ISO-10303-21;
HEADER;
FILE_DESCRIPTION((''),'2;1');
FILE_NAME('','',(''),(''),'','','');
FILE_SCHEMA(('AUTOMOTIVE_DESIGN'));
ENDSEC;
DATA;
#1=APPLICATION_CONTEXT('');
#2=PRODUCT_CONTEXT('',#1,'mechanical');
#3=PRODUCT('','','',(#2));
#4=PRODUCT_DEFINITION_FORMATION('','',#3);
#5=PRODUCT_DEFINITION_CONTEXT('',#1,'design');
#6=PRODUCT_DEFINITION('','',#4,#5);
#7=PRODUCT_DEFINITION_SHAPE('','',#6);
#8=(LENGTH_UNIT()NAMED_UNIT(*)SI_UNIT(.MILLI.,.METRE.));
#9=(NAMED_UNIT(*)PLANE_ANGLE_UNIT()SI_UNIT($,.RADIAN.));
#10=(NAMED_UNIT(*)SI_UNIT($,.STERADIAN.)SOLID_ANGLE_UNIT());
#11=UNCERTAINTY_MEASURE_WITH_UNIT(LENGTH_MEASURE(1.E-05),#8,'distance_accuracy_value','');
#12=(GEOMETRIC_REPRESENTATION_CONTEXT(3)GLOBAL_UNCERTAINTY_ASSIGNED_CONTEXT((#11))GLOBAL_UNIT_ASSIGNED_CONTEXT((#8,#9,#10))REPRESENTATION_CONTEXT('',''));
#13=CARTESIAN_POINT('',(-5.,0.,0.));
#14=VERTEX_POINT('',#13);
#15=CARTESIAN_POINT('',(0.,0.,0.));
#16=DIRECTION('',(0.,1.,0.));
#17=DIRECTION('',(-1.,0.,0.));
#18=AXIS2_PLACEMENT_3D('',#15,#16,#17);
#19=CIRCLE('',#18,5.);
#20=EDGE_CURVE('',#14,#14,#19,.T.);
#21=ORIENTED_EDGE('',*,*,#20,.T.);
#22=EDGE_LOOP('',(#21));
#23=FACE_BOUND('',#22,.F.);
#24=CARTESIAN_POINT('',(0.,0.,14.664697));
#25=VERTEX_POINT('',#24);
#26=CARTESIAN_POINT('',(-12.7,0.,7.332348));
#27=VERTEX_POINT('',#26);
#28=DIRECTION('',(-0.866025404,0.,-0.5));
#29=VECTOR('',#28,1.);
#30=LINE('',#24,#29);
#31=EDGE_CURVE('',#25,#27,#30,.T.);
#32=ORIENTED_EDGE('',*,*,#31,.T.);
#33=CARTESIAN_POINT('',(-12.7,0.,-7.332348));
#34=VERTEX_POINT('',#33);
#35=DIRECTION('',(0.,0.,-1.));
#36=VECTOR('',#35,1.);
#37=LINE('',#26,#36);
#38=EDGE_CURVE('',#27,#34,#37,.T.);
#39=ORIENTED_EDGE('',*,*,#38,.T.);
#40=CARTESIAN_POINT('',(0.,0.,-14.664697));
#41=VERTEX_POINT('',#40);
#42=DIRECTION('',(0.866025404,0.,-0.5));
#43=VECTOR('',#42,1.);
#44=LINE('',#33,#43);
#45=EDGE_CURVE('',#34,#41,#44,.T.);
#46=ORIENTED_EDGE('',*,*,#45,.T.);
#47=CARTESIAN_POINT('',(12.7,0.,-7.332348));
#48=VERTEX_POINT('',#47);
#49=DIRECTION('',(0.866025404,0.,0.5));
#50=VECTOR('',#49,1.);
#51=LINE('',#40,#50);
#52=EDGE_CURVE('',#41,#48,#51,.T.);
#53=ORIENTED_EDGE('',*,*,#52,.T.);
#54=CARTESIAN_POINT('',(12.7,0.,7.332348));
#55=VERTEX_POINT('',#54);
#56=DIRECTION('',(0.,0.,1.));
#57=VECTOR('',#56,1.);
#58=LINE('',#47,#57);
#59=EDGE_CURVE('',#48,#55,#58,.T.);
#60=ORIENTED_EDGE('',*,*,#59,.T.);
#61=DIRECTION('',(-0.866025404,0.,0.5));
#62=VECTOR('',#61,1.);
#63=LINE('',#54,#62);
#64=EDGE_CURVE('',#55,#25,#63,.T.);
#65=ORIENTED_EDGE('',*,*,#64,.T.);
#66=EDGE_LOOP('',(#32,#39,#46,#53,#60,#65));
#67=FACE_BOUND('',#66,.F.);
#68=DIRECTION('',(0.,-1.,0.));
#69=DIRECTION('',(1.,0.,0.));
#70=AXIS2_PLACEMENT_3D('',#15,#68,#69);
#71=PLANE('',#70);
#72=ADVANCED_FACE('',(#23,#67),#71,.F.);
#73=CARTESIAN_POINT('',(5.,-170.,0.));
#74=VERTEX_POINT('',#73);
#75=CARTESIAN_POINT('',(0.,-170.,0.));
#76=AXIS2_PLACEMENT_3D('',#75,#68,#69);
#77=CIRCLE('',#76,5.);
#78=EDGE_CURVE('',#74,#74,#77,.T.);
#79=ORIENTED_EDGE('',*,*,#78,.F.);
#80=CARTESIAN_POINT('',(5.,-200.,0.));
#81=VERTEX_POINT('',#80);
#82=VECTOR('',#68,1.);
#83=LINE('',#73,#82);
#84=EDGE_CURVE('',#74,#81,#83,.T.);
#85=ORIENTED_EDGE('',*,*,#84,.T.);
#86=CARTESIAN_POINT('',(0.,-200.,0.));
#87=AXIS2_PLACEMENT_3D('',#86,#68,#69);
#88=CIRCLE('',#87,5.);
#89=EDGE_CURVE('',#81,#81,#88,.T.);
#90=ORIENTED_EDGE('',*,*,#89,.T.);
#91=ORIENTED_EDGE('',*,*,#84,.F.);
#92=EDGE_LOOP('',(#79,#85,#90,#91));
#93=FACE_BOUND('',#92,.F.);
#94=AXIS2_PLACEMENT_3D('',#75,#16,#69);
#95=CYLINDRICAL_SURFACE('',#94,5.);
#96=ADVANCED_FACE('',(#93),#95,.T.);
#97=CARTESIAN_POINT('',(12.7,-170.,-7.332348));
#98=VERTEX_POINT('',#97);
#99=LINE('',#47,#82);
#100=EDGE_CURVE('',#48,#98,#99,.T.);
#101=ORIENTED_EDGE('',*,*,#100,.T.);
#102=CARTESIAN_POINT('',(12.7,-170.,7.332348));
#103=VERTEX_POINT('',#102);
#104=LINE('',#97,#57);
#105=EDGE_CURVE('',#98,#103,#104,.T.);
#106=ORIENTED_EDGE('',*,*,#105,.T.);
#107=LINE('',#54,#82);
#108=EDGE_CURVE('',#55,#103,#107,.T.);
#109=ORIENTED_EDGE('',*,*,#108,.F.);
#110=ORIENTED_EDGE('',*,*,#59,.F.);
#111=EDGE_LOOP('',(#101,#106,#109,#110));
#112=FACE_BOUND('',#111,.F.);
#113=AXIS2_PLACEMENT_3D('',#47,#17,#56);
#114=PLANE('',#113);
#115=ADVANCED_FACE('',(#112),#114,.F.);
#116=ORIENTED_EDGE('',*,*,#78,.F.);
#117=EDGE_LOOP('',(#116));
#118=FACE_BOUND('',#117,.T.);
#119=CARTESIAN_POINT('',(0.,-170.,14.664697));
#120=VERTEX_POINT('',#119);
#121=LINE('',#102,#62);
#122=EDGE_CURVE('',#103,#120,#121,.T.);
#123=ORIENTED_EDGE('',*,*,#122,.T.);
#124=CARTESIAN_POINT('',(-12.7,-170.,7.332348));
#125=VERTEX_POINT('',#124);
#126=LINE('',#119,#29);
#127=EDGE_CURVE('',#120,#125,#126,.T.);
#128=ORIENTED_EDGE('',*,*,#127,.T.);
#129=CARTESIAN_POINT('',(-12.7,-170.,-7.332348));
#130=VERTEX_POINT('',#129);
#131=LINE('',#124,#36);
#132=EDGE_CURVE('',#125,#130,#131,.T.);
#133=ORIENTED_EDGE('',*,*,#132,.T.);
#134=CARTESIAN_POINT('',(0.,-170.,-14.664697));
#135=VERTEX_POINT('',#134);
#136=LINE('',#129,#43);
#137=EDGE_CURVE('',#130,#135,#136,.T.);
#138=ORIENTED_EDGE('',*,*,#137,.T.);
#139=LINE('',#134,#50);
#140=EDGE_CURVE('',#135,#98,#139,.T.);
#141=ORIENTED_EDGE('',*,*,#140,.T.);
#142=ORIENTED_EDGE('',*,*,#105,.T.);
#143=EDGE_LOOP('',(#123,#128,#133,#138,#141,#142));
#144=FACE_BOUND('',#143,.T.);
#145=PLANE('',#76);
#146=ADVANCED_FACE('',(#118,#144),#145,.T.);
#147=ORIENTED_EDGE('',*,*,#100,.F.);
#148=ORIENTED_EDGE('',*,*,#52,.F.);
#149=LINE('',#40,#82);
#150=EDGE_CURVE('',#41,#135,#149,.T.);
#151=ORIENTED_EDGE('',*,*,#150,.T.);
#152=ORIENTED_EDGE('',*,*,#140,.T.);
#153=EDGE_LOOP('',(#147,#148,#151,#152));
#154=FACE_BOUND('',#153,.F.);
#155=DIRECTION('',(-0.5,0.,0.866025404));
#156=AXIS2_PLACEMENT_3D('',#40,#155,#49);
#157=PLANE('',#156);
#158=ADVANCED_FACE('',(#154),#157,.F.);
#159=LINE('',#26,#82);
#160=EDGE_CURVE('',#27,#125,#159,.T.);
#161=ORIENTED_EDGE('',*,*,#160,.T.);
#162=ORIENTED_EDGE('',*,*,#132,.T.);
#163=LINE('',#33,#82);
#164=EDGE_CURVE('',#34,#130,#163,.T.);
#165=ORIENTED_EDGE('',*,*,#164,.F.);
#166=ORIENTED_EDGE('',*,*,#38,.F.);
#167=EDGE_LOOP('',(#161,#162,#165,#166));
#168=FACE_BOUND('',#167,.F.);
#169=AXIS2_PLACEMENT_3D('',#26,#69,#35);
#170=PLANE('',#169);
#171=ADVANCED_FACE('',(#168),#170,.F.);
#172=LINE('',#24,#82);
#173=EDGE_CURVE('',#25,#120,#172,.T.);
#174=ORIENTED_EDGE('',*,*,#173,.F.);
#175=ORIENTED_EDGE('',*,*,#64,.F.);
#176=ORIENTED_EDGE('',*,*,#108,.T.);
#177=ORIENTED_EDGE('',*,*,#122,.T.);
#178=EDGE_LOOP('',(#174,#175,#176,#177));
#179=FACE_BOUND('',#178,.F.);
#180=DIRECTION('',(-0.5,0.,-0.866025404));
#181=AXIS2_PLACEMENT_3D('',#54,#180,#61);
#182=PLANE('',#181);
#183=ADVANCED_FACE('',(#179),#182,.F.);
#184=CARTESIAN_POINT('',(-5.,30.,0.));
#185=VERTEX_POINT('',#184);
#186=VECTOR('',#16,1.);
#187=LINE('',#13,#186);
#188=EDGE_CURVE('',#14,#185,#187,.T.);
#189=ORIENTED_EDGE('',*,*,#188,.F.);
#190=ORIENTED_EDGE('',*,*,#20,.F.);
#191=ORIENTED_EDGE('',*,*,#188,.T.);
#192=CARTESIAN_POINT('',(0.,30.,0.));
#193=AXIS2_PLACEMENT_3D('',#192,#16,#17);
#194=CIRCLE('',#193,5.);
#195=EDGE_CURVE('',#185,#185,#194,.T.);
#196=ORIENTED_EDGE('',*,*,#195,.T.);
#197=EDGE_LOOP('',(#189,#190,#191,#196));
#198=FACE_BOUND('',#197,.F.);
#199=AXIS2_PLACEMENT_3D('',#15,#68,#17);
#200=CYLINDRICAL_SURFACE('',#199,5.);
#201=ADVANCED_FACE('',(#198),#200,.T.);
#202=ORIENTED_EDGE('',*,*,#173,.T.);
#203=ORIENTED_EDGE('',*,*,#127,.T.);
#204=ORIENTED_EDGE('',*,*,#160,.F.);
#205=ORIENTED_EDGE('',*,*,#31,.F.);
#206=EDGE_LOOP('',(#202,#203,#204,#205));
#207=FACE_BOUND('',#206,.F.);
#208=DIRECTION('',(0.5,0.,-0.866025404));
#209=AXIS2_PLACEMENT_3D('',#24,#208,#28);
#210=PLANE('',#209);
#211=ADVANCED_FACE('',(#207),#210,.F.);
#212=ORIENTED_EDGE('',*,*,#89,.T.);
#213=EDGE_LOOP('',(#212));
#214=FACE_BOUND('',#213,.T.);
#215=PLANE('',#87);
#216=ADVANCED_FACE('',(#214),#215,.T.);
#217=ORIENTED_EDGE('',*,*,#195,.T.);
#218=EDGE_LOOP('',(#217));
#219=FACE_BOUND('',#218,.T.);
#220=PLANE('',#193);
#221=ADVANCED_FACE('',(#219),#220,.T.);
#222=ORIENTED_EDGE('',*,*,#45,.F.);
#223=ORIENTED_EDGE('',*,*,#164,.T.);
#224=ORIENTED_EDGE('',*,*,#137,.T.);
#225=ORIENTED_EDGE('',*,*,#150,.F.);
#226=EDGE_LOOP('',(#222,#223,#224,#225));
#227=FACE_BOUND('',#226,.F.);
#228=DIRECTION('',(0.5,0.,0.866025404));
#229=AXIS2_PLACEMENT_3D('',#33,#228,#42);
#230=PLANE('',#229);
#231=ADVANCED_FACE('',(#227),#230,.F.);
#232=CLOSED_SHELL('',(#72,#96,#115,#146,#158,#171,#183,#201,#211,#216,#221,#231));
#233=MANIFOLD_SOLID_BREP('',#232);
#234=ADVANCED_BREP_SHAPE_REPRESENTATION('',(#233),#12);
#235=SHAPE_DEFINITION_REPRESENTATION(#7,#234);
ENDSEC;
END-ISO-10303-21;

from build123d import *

# Parameters (mm, degrees)
F1_DEPTH = 170
F2_R     = 5
F3_DEPTH = 30
F4_R     = 5
F5_DEPTH = 30


# Not quite as in the source:
# - a feature names something its author has since deleted; it is built from what else it names


with BuildPart() as f1:
    # F0 (on Front) → F1 (new body)
    with BuildSketch(Plane.XZ):
        Polygon((-12.7, 7.3323484187), (-12.7, -7.3323484187), (0, -14.6646968374), (12.7, -7.3323484187), (12.7, 7.3323484187), (0, 14.6646968374), align=None)
    extrude(amount=F1_DEPTH)

    # F2 (on face) → F3 (join)
    with BuildSketch(Plane(origin=(0, 0, 0), x_dir=(-1, 0, 0), z_dir=(0, 1, 0))):
        Circle(F2_R)
    extrude(amount=F3_DEPTH)

    # F4 (on face) → F5 (join)
    with BuildSketch(Plane.XZ.offset(170)):
        Circle(F4_R)
    extrude(amount=F5_DEPTH)


solid = f1.part
